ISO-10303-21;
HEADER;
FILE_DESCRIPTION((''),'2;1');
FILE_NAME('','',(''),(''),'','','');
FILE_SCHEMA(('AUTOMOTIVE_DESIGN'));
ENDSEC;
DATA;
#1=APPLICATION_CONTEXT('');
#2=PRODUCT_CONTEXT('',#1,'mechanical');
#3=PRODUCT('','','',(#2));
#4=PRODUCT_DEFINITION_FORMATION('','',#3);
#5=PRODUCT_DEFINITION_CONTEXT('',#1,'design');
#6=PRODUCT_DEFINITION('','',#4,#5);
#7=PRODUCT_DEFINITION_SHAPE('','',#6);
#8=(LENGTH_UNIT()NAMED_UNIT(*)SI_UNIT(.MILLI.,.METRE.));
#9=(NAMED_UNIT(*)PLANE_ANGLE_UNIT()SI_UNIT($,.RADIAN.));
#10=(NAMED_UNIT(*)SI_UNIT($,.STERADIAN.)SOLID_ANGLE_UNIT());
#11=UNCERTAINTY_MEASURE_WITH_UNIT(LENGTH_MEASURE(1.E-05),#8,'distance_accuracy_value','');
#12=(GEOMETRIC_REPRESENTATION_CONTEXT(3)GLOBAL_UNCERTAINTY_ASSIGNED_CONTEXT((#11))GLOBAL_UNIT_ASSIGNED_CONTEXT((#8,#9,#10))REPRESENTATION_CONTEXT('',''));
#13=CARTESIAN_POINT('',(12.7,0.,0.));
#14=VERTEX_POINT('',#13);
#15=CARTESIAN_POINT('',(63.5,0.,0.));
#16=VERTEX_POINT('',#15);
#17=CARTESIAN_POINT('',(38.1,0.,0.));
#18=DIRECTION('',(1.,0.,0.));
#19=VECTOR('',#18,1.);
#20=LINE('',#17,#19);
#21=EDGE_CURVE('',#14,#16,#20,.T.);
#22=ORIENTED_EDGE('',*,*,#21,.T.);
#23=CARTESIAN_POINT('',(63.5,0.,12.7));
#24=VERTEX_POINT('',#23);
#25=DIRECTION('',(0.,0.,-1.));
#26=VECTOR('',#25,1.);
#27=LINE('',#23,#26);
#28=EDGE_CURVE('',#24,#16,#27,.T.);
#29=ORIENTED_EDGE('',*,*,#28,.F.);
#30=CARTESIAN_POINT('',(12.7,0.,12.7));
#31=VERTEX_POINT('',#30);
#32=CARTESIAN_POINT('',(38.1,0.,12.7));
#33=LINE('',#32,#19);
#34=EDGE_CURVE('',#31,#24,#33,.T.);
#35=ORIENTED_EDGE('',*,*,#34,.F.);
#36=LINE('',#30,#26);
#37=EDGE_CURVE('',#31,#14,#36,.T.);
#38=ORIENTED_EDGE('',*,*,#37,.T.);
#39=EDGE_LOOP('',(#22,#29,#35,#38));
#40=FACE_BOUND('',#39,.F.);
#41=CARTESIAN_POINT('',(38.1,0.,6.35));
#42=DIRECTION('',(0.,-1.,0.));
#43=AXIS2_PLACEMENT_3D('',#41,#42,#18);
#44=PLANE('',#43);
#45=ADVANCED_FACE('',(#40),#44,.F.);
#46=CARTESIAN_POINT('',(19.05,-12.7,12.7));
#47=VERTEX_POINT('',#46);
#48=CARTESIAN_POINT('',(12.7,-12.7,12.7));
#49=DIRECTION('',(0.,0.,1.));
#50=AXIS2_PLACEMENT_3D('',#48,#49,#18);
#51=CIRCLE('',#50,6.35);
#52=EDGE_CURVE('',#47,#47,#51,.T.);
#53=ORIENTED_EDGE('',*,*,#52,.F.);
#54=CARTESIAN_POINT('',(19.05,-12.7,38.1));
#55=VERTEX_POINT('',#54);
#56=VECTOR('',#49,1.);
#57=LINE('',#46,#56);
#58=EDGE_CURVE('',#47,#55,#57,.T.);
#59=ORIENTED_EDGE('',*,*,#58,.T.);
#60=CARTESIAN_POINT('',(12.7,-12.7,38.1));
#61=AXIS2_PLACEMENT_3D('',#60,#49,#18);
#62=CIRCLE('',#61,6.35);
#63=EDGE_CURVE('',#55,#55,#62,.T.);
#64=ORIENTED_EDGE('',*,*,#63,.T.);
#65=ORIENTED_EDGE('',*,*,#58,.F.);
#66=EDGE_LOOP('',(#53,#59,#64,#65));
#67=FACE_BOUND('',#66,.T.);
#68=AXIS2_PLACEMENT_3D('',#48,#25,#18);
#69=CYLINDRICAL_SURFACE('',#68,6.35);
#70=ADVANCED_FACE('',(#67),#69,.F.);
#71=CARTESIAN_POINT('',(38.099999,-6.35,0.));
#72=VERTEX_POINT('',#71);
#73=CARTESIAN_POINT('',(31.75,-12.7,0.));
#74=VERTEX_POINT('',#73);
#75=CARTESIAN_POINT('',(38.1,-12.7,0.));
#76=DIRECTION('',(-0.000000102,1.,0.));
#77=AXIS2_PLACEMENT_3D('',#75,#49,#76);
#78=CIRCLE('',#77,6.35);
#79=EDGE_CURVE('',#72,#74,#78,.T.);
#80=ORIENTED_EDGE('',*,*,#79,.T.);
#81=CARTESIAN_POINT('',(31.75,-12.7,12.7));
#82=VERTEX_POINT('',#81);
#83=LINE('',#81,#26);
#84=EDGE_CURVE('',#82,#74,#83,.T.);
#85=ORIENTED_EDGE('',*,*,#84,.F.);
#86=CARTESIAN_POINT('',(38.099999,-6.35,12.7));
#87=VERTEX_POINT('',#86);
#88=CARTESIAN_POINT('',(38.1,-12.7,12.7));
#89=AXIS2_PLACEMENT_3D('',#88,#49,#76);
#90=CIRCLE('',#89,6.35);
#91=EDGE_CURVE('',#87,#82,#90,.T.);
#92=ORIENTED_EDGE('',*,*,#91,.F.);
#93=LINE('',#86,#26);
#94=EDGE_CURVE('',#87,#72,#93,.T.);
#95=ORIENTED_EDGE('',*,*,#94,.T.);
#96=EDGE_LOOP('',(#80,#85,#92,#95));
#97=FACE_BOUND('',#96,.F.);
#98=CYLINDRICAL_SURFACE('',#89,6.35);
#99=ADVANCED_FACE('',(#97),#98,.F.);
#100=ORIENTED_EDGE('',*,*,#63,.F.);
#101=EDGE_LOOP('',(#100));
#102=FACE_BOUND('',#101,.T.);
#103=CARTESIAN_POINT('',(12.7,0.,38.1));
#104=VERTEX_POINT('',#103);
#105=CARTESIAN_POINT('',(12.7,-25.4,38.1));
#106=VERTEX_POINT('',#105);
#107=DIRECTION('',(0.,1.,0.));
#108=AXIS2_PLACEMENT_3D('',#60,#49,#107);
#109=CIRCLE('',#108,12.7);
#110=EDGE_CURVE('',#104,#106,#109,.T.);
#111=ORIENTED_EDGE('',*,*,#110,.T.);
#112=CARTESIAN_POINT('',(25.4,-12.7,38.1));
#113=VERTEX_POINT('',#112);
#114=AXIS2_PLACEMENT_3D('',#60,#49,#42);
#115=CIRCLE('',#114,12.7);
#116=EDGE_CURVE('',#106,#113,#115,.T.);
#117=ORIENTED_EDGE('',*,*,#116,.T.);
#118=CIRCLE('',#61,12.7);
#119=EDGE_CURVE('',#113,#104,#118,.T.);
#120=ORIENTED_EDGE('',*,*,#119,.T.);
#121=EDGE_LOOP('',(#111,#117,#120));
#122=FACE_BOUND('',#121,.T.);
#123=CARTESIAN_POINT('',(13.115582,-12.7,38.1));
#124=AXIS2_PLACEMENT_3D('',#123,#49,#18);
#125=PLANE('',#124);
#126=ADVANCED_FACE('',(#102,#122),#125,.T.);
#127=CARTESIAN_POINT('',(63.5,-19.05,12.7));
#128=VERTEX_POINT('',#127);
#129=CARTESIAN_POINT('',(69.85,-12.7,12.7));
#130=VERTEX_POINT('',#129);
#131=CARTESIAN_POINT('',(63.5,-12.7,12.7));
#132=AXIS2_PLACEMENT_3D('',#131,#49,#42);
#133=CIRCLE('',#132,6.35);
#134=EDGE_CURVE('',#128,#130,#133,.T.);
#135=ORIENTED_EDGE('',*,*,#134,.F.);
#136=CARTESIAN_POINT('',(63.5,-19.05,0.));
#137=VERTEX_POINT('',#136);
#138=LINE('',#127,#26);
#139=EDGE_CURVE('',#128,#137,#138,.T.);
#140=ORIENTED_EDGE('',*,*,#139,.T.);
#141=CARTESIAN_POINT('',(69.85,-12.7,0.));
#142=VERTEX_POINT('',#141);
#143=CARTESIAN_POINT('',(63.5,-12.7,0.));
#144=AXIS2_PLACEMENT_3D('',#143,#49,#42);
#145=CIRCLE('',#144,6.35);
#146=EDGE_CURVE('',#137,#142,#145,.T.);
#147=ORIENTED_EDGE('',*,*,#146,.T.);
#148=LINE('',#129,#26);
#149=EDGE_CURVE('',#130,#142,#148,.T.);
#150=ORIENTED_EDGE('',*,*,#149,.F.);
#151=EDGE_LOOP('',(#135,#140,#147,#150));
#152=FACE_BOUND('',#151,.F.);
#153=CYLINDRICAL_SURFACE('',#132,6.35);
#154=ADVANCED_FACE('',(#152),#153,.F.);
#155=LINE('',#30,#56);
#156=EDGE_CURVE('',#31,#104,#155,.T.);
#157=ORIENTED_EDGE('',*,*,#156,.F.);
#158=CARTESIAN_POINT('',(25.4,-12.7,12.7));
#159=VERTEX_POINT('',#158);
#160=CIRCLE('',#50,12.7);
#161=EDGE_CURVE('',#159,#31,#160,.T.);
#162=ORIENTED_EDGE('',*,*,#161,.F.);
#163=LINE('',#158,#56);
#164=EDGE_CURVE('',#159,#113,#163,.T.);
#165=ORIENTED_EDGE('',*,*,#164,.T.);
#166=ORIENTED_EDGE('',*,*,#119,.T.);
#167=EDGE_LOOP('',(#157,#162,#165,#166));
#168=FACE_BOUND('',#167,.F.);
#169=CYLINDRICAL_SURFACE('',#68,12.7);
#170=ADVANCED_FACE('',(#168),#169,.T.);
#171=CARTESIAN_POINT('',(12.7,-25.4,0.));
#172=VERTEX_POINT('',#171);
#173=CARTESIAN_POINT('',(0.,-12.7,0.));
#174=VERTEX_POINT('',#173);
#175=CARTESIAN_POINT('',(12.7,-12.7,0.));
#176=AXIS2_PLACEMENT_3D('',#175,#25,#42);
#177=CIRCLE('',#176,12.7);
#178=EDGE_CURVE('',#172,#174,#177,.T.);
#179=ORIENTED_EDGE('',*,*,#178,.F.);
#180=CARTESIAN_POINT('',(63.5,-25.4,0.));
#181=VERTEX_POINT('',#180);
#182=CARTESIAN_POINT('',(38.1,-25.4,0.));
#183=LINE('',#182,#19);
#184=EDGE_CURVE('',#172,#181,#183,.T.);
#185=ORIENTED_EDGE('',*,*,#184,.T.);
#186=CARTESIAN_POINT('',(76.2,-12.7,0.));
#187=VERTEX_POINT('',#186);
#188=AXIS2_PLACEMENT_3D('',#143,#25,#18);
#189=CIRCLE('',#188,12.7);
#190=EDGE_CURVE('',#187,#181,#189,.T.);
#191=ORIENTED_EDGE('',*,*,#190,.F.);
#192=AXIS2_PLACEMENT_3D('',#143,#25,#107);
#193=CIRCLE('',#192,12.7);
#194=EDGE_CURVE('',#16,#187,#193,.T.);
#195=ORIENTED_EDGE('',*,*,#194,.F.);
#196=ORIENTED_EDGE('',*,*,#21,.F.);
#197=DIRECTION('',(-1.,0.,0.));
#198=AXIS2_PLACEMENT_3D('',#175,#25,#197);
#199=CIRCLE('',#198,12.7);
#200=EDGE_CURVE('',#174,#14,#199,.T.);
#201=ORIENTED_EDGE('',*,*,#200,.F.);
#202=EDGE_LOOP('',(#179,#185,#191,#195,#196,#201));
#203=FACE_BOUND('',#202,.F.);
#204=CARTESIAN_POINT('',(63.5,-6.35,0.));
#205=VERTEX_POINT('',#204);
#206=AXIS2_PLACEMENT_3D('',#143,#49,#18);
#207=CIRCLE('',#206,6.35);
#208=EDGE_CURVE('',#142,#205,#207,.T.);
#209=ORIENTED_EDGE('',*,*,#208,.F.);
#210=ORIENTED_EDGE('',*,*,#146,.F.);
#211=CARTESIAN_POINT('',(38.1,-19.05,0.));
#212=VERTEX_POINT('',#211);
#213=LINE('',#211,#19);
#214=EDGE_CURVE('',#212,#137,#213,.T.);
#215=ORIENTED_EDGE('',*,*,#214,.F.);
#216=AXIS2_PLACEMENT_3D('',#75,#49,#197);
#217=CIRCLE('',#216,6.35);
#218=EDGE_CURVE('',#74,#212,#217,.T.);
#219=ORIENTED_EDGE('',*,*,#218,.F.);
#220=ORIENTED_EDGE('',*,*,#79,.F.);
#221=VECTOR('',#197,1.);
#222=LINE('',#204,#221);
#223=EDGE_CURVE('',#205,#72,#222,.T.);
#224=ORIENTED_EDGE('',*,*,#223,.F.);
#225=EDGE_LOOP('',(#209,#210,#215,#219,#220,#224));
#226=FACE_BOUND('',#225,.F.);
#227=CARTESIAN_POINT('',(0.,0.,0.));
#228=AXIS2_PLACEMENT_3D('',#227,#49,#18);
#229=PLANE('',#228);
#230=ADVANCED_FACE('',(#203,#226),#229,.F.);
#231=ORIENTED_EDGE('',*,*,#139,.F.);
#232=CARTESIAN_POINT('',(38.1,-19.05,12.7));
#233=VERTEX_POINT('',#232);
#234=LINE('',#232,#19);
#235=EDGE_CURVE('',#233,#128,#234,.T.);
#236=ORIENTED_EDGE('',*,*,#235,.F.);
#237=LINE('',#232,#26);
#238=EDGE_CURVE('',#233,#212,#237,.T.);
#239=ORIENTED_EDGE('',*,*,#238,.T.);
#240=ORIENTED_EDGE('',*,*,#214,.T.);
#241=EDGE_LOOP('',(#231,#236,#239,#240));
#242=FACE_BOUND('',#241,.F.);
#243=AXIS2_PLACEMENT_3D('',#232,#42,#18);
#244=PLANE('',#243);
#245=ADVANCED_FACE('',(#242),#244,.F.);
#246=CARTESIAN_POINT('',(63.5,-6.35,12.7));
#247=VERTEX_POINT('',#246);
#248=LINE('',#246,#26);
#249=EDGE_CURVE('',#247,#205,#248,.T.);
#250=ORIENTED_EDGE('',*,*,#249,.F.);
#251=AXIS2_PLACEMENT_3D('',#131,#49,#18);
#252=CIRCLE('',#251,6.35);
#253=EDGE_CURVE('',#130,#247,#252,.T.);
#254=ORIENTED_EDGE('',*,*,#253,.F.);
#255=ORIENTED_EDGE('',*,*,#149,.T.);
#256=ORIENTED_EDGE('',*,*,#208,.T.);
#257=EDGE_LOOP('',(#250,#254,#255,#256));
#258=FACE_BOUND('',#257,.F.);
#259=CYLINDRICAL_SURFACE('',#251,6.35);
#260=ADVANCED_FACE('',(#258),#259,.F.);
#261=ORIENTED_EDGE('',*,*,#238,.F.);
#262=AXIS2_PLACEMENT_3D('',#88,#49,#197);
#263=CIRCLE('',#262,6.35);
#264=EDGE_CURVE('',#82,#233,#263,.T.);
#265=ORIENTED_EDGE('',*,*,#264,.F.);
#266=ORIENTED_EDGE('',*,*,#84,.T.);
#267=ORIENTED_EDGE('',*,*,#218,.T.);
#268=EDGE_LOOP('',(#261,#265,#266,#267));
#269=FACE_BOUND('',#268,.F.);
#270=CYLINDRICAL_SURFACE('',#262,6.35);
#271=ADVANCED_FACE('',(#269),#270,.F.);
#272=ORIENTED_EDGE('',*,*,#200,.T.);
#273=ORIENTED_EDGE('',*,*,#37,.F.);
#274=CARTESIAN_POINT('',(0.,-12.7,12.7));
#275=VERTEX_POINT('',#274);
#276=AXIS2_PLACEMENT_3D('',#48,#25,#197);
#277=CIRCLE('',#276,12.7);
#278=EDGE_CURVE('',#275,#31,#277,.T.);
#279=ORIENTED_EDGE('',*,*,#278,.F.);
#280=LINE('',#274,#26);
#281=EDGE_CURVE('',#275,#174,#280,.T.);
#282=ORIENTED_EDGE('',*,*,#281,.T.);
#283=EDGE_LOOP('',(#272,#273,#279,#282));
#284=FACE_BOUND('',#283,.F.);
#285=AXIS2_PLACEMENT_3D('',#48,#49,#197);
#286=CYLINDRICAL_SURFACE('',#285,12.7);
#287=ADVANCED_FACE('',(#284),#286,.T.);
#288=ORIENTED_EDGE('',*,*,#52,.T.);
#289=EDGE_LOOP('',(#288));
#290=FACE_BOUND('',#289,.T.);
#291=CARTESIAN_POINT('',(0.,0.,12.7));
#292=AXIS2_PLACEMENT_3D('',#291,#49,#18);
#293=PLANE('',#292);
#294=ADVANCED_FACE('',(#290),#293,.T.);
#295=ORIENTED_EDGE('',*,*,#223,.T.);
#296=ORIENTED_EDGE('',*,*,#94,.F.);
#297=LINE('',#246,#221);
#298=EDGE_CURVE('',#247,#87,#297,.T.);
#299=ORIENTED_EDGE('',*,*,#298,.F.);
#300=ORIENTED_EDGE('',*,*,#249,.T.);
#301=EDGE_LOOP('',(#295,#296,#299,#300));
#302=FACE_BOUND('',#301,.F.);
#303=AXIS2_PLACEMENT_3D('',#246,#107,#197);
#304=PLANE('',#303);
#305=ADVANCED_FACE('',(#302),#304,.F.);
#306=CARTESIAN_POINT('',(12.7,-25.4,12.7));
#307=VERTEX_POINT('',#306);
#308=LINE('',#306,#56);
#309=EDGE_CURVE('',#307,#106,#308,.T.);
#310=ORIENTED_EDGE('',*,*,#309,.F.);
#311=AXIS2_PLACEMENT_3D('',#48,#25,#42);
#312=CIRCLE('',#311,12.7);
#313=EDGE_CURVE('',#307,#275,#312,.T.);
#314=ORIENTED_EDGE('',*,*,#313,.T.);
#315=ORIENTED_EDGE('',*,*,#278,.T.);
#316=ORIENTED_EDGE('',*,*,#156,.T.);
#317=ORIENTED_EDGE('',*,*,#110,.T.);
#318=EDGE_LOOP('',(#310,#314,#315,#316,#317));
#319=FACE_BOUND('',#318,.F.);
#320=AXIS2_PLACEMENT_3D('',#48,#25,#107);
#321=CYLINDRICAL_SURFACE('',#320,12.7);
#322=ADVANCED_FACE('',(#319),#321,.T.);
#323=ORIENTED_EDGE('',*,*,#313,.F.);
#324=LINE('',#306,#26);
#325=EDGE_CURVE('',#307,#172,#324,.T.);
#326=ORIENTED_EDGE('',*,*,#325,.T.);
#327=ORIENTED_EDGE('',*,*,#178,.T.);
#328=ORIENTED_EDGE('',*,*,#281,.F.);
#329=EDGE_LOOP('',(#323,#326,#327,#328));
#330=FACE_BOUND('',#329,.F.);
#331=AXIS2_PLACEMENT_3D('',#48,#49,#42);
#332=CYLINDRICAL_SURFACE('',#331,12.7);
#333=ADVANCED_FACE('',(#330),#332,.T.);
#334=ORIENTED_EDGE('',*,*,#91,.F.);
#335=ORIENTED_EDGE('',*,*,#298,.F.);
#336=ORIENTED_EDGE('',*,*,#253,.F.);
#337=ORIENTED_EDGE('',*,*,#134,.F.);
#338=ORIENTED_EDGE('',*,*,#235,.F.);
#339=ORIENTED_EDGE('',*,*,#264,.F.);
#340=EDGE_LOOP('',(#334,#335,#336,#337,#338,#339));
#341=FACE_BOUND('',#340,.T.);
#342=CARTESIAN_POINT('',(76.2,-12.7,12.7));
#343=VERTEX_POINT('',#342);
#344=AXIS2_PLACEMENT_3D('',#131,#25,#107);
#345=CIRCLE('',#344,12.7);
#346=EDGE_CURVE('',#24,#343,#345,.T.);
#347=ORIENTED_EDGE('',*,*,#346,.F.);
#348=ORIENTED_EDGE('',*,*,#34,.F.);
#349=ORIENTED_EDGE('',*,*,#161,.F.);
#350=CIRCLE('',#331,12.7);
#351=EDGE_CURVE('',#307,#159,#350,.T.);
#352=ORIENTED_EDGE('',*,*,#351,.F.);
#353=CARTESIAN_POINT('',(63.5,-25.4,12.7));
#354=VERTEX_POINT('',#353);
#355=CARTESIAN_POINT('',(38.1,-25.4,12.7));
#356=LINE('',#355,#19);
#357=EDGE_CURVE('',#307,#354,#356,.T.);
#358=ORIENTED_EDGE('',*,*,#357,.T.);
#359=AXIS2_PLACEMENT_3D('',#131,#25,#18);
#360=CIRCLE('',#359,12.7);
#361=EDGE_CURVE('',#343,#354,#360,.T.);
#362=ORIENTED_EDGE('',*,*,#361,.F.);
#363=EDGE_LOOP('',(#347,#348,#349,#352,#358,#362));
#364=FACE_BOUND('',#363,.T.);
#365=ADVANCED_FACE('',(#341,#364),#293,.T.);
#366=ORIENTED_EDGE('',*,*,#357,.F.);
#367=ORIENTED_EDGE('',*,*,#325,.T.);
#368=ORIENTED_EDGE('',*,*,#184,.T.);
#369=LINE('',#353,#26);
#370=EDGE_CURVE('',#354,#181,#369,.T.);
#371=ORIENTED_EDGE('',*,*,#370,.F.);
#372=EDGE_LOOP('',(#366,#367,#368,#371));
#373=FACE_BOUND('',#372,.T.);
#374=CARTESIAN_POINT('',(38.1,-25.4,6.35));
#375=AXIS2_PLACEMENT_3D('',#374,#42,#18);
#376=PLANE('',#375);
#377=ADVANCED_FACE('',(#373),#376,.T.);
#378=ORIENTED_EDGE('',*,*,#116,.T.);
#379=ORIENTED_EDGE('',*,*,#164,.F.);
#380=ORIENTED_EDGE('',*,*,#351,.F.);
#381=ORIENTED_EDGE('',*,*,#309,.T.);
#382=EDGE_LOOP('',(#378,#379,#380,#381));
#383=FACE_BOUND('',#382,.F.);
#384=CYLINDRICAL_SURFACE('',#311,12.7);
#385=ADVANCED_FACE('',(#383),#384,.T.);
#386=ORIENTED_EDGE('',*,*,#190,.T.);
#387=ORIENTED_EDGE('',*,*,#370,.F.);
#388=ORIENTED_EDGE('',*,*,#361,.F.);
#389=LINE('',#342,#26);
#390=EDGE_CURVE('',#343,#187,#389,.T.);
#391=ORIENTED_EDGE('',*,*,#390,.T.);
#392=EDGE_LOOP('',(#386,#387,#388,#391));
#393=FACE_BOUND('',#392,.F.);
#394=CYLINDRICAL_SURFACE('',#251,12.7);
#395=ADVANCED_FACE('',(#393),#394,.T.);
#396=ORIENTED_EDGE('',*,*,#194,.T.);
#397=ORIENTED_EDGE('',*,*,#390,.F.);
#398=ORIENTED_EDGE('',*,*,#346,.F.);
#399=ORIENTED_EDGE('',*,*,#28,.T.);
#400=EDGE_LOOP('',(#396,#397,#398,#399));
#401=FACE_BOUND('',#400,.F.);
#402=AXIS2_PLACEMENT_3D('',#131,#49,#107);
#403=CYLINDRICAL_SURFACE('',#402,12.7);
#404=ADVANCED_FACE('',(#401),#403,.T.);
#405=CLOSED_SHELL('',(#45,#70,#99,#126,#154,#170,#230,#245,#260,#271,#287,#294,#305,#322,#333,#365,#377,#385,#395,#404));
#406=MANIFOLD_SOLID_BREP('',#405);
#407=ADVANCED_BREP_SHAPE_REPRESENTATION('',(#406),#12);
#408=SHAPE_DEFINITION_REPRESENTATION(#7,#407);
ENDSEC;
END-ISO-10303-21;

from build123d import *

# Parameters (mm, degrees)
F0_W     = 76.2
F0_H     = 12.7
F1_DEPTH = 25.4
F3_DEPTH = 12.7
F4_R     = 6.35
F5_DEPTH = 25.4


# Not quite as in the source:
# - ends of sketch curves that miss each other by under 0.0002 mm in the source are joined


with BuildPart() as f1:
    # F0 (on Front) → F1 (new body)
    with BuildSketch(Plane.XZ):
        with Locations((38.1, 6.35)):
            Rectangle(F0_W, F0_H)
    extrude(amount=F1_DEPTH)

    # F2 (on face) → F3 (cut)
    with BuildSketch(Plane.XY.offset(12.7)):
        with BuildLine():
            Line((0, -25.4), (12.7, -25.4))
            ThreePointArc((12.7, -25.4), (3.7197438789, -21.6802561211), (0, -12.7))
            Line((0, -12.7), (0, -25.4))
        make_face()
        with BuildLine():
            ThreePointArc((0, -12.7), (3.7197438789, -3.7197438789), (12.7, 0))
            Line((12.7, 0), (0, 0))
            Line((0, 0), (0, -12.7))
        make_face()
        with BuildLine():
            ThreePointArc((63.5, -19.05), (57.15, -12.7), (63.5, -6.35))
            Line((63.5, -6.35), (38.0999993506, -6.35))
            ThreePointArc((38.0999993506, -6.35), (42.5901278309, -8.2098717099), (44.45, -12.7))
            ThreePointArc((44.45, -12.7), (42.5901280605, -17.1901280605), (38.1, -19.05))
            Line((38.1, -19.05), (63.5, -19.05))
        make_face()
        with BuildLine():
            Line((38.0999996753, -12.7), (38.0999993506, -6.35))
            ThreePointArc((38.0999993506, -6.35), (33.6098717099, -8.2098721691), (31.75, -12.7))
            Line((31.75, -12.7), (38.0999996753, -12.7))
        make_face()
        with BuildLine():
            ThreePointArc((31.75, -12.7), (33.6098719395, -17.1901280605), (38.1, -19.05))
            Line((38.1, -19.05), (38.0999996753, -12.7))
            Line((38.0999996753, -12.7), (31.75, -12.7))
        make_face()
        with BuildLine():
            ThreePointArc((44.45, -12.7), (42.5901278309, -8.2098717099), (38.0999993506, -6.35))
            Line((38.0999993506, -6.35), (38.0999996753, -12.7))
            Line((38.0999996753, -12.7), (38.1, -19.05))
            ThreePointArc((38.1, -19.05), (42.5901280605, -17.1901280605), (44.45, -12.7))
        make_face()
        with BuildLine():
            Line((63.5, -19.05), (63.5, -6.35))
            ThreePointArc((63.5, -6.35), (57.15, -12.7), (63.5, -19.05))
        make_face()
        with BuildLine():
            ThreePointArc((63.5, -19.05), (67.9901280605, -17.1901280605), (69.85, -12.7))
            ThreePointArc((69.85, -12.7), (67.9901280605, -8.2098719395), (63.5, -6.35))
            Line((63.5, -6.35), (63.5, -19.05))
        make_face()
        with BuildLine():
            Line((76.2, 0), (63.5, 0))
            ThreePointArc((63.5, 0), (72.4802561211, -3.7197438789), (76.2, -12.7))
            Line((76.2, -12.7), (76.2, 0))
        make_face()
        with BuildLine():
            ThreePointArc((76.2, -12.7), (72.4802561211, -21.6802561211), (63.5, -25.4))
            Line((63.5, -25.4), (76.2, -25.4))
            Line((76.2, -25.4), (76.2, -12.7))
        make_face()
    extrude(amount=-F3_DEPTH, mode=Mode.SUBTRACT)

    # F4 (on face) → F5 (join)
    with BuildSketch(Plane.XY.offset(12.7)):
        with BuildLine():
            ThreePointArc((12.7, -25.4), (21.6802561211, -21.6802561211), (25.4, -12.7))
            ThreePointArc((25.4, -12.7), (21.6802561211, -3.7197438789), (12.7, 0))
            ThreePointArc((12.7, 0), (0, -12.7), (12.7, -25.4))
        make_face()
        with Locations((12.7, -12.7)):
            Circle(F4_R, mode=Mode.SUBTRACT)
    extrude(amount=F5_DEPTH)


solid = f1.part
